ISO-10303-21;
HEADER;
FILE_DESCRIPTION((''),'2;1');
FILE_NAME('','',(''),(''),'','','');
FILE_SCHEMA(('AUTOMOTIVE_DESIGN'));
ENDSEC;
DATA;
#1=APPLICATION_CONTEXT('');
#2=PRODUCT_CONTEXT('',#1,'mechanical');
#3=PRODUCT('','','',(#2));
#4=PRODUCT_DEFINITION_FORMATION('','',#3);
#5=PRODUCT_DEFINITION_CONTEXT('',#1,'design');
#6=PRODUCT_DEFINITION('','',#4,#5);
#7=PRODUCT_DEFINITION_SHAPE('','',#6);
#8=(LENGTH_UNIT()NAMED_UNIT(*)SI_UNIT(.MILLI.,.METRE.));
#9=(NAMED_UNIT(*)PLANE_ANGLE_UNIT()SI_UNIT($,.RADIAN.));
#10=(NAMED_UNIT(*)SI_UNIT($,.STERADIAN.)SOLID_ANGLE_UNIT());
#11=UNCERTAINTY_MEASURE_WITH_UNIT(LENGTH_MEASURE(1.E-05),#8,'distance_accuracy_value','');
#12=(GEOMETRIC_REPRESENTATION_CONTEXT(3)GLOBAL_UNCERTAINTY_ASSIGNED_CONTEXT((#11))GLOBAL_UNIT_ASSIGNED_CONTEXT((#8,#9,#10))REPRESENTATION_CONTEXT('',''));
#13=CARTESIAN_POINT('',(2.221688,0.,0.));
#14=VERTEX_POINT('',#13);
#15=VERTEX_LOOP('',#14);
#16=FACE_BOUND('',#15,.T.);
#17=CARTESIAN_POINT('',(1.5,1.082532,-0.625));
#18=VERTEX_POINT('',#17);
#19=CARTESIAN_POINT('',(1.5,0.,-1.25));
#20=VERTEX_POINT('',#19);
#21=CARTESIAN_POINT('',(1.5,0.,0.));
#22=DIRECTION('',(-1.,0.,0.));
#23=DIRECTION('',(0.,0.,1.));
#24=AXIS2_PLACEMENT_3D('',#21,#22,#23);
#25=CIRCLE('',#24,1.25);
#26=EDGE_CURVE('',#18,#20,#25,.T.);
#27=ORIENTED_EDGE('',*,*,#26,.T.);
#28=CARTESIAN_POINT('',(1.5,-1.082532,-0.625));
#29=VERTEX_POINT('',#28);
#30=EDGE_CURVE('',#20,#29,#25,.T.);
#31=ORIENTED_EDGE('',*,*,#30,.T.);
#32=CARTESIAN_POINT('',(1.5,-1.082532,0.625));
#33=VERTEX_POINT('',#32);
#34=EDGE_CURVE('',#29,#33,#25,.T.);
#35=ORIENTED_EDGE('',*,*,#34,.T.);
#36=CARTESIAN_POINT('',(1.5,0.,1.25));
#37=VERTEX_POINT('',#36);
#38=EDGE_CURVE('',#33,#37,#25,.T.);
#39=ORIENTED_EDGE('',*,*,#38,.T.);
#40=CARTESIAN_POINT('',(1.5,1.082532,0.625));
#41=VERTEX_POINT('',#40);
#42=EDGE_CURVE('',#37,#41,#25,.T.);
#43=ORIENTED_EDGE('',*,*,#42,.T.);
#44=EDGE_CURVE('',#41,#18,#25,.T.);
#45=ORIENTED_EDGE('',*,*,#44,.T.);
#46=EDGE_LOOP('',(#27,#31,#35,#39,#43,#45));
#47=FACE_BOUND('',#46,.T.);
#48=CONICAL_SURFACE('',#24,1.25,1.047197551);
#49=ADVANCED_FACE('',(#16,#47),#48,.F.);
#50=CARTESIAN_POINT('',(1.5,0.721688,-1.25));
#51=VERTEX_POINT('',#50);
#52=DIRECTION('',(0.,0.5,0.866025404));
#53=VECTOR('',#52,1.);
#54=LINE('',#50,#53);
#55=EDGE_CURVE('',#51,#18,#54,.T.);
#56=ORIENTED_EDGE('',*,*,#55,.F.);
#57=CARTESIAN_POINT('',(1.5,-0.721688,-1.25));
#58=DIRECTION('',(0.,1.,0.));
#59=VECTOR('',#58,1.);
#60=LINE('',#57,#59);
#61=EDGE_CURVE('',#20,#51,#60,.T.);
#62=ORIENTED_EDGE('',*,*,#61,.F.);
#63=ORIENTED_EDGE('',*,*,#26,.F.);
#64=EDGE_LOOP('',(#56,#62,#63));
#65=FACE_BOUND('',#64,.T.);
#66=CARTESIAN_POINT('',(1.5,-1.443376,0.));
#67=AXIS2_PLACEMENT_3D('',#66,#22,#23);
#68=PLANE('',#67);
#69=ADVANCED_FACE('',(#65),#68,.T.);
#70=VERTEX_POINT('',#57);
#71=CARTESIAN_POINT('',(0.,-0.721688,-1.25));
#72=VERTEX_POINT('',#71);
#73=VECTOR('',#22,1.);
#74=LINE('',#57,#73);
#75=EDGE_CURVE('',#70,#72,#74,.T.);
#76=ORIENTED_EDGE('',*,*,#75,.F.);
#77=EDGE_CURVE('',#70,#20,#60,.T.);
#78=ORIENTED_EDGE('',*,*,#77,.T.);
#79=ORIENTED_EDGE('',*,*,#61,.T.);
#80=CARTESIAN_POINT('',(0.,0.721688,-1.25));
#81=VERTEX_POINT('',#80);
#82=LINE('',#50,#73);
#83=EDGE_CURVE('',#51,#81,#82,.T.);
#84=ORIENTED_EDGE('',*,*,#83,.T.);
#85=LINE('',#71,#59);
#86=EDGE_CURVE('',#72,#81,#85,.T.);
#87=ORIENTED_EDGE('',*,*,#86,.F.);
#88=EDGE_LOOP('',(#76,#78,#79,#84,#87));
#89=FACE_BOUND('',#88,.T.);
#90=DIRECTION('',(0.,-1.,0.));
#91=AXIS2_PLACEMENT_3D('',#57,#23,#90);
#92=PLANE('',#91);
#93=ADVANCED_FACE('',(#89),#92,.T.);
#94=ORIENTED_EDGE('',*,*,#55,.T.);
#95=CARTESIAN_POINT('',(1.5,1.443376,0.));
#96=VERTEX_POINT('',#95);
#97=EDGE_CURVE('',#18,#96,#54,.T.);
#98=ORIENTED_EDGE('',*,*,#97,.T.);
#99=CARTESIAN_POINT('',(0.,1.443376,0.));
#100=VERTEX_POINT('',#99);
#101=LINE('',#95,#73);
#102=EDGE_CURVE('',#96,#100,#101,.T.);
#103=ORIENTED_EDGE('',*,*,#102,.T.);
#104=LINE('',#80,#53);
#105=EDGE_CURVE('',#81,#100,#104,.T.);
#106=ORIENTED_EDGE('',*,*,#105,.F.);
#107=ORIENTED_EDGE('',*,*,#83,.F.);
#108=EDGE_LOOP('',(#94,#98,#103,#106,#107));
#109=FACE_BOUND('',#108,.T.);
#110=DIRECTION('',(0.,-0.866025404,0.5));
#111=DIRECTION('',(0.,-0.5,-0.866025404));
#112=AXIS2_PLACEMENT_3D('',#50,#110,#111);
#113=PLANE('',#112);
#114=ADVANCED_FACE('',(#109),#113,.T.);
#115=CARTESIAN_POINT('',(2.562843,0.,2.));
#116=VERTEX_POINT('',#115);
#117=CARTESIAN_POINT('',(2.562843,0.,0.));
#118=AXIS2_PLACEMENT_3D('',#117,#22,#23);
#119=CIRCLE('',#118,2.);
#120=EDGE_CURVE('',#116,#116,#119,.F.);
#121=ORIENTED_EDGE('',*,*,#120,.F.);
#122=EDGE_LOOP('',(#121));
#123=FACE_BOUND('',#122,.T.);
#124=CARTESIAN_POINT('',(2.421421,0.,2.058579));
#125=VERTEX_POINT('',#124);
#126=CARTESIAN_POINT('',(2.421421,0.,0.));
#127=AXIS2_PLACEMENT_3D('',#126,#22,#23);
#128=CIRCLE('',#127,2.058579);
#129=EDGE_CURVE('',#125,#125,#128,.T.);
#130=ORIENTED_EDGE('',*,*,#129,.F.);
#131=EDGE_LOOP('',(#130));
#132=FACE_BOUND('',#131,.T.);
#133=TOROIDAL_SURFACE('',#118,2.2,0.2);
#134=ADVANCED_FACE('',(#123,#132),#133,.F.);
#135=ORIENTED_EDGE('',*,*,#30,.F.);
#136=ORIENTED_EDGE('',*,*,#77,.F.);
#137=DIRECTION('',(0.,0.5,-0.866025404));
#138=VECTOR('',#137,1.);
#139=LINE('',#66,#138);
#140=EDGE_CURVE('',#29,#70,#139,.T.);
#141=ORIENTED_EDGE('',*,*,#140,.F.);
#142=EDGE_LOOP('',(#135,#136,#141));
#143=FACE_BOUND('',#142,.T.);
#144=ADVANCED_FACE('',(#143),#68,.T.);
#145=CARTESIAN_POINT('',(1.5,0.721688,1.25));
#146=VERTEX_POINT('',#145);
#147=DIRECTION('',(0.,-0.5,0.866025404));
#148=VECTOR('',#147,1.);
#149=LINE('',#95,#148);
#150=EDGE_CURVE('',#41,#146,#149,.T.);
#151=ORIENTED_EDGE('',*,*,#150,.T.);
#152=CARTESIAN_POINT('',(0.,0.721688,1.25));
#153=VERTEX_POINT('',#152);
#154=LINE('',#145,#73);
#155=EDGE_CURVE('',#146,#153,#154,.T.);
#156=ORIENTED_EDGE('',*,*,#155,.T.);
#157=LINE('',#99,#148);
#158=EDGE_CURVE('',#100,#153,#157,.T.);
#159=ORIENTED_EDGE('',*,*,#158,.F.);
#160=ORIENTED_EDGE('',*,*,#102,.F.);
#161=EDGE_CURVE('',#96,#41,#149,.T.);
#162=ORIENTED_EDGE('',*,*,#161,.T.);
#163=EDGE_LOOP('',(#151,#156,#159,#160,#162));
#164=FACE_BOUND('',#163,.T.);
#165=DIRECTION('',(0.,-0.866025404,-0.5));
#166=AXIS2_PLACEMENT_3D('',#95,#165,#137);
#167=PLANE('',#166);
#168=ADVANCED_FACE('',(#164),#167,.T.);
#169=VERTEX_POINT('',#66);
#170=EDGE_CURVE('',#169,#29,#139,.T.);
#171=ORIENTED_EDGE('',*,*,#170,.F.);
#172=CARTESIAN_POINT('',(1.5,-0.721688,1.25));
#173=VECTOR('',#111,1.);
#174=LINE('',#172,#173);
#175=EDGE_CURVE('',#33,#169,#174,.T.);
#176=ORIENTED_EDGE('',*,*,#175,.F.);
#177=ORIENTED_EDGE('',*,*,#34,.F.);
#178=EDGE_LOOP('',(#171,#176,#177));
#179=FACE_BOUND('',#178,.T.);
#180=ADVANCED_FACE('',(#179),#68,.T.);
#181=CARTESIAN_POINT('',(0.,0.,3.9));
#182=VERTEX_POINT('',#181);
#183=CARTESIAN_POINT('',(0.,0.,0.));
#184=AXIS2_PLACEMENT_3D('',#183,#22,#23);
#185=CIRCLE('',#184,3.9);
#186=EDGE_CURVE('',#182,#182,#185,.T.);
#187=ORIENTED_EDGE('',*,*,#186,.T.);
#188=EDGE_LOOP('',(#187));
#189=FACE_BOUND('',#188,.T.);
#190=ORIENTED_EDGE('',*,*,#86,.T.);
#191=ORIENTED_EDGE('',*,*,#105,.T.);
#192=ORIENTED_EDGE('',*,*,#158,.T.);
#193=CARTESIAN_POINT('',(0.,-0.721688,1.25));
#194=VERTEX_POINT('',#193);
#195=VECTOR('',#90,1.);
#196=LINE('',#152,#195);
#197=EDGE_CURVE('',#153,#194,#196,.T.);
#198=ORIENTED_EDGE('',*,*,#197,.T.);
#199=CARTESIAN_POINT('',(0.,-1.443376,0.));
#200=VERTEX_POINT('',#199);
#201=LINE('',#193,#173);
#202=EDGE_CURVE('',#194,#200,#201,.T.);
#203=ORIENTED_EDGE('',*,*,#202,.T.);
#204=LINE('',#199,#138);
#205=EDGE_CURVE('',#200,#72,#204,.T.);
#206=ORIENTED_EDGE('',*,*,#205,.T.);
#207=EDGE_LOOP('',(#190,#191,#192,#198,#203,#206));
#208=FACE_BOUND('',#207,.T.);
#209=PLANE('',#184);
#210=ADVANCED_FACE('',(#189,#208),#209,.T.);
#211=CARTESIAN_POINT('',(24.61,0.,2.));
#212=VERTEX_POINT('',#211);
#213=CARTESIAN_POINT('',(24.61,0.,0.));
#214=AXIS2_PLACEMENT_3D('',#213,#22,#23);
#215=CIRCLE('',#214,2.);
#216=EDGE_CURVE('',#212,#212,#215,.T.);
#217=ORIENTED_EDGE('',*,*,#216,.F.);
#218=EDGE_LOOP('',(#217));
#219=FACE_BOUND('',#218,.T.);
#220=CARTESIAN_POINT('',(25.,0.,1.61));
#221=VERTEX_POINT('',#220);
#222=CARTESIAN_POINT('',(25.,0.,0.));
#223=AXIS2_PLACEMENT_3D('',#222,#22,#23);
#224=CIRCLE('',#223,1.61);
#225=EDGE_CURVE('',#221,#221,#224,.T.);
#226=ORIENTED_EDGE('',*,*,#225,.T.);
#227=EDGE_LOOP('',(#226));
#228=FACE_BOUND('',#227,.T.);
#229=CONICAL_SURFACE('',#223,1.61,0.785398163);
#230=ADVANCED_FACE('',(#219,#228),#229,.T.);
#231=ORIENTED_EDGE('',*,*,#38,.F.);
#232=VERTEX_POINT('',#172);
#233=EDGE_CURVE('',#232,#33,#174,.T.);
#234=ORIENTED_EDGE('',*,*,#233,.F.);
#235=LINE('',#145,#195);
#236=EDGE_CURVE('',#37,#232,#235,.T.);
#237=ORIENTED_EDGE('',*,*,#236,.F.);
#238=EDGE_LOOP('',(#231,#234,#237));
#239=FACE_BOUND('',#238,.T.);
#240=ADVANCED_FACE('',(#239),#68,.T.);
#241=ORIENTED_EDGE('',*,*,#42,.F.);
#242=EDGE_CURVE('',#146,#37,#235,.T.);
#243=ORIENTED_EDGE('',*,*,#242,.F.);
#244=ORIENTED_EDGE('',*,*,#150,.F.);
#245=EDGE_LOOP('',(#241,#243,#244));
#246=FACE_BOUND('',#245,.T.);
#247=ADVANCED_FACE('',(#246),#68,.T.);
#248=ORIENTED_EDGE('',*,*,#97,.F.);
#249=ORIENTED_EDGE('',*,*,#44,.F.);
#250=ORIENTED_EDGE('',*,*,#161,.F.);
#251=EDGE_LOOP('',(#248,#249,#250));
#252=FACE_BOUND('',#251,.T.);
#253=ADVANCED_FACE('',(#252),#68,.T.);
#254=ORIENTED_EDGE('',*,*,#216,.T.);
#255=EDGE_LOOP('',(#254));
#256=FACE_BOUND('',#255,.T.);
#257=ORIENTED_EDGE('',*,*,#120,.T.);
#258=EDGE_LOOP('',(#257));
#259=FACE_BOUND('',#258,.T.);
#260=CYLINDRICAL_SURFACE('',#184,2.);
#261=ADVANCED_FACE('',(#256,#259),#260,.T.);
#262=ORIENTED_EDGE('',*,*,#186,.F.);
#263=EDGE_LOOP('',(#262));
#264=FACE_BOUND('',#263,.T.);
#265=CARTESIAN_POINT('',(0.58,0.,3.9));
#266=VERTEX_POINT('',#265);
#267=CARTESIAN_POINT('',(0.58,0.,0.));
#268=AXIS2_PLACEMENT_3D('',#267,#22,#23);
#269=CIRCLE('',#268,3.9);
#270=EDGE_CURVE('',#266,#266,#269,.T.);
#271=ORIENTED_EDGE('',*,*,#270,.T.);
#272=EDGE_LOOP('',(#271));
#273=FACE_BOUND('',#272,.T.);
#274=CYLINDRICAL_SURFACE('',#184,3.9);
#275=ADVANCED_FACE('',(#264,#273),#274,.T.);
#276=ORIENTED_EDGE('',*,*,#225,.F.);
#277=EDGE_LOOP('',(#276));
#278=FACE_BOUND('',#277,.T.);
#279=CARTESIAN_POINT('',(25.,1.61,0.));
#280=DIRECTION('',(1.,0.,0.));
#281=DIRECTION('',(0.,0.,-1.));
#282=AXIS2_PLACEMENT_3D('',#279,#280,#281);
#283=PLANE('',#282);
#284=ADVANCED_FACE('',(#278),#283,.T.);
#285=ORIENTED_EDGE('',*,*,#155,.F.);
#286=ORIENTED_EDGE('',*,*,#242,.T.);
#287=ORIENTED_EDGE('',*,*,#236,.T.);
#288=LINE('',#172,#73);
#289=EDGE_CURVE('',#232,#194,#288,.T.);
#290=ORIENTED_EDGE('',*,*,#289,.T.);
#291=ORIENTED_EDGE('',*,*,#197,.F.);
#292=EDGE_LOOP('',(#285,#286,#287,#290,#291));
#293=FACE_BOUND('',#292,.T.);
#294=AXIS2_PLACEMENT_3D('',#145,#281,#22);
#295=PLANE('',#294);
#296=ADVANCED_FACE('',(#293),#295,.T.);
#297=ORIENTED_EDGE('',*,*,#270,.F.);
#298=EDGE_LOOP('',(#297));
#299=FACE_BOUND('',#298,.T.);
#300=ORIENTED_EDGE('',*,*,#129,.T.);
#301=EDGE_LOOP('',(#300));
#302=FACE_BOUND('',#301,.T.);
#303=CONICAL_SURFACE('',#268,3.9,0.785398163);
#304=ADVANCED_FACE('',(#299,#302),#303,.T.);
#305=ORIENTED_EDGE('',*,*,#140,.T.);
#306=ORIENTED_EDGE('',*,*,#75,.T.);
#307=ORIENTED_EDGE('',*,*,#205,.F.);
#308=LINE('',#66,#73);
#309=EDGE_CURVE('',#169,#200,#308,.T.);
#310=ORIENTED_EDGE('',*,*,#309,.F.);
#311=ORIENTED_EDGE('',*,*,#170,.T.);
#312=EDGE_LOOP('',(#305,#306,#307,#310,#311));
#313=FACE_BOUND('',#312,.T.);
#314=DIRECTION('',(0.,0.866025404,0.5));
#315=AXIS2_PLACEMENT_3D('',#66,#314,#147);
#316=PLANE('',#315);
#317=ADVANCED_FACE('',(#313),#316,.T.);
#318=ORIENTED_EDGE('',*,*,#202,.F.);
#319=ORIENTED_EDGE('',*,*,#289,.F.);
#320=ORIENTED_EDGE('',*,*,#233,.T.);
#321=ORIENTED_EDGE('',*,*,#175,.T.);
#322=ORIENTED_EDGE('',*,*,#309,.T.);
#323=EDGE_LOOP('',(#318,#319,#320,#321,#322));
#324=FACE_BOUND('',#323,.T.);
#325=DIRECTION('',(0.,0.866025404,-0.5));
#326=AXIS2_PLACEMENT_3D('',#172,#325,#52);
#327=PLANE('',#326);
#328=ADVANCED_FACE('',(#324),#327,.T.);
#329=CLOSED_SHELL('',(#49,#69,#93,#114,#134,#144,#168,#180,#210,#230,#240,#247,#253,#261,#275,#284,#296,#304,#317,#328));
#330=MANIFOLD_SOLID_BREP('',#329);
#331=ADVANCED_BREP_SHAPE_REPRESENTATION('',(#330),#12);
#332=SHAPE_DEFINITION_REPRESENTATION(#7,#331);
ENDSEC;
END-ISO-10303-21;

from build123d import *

# Parameters (mm, degrees)
FILLET1_R   = 0.2
HEX_START   = -1.5
HEX_2_DEPTH = 1.5


with BuildPart() as part:
    # BodySke → BaseBody (revolve)
    with BuildSketch(Plane.XY, mode=Mode.PRIVATE) as basebody_sk:
        Polygon((0, 0), (0, 3.9), (0.58, 3.9), (2.48, 2), (24.61, 2), (25, 1.61), (25, 0), align=None)
    revolve(basebody_sk.sketch.rotate(Axis((0, 0, 0), (1, 0, 0)), 90), axis=Axis((0, 0, 0), (1, 0, 0)))

    # Fillet1
    fillet1_edges = [part.edges().sort_by_distance(p)[0] for p in [
        (2.48, 0, -2),
    ]]
    fillet(fillet1_edges, radius=FILLET1_R)

    # Hex 2: read off the stored shape, not the designer's step
    # Hex 2 outline → Hex 2 (cut)
    with BuildSketch(Plane.ZY.offset(HEX_START)):
        Polygon((-1.25, -0.721687836), (0, -1.443375673), (1.25, -0.721687836), (1.25, 0.721687836), (0, 1.443375673), (-1.25, 0.721687836), align=None)
    extrude(amount=HEX_2_DEPTH, mode=Mode.SUBTRACT)

    # Hex 2 2 outline → Hex 2 2 (revolve, cut)
    with BuildSketch(Plane.YX):
        Polygon((1.25, 1.5), (0, 2.221687836), (0, 1.5), align=None)
    revolve(axis=Axis((0, 0, 0), (1, 0, 0)), mode=Mode.SUBTRACT)


solid = part.part
